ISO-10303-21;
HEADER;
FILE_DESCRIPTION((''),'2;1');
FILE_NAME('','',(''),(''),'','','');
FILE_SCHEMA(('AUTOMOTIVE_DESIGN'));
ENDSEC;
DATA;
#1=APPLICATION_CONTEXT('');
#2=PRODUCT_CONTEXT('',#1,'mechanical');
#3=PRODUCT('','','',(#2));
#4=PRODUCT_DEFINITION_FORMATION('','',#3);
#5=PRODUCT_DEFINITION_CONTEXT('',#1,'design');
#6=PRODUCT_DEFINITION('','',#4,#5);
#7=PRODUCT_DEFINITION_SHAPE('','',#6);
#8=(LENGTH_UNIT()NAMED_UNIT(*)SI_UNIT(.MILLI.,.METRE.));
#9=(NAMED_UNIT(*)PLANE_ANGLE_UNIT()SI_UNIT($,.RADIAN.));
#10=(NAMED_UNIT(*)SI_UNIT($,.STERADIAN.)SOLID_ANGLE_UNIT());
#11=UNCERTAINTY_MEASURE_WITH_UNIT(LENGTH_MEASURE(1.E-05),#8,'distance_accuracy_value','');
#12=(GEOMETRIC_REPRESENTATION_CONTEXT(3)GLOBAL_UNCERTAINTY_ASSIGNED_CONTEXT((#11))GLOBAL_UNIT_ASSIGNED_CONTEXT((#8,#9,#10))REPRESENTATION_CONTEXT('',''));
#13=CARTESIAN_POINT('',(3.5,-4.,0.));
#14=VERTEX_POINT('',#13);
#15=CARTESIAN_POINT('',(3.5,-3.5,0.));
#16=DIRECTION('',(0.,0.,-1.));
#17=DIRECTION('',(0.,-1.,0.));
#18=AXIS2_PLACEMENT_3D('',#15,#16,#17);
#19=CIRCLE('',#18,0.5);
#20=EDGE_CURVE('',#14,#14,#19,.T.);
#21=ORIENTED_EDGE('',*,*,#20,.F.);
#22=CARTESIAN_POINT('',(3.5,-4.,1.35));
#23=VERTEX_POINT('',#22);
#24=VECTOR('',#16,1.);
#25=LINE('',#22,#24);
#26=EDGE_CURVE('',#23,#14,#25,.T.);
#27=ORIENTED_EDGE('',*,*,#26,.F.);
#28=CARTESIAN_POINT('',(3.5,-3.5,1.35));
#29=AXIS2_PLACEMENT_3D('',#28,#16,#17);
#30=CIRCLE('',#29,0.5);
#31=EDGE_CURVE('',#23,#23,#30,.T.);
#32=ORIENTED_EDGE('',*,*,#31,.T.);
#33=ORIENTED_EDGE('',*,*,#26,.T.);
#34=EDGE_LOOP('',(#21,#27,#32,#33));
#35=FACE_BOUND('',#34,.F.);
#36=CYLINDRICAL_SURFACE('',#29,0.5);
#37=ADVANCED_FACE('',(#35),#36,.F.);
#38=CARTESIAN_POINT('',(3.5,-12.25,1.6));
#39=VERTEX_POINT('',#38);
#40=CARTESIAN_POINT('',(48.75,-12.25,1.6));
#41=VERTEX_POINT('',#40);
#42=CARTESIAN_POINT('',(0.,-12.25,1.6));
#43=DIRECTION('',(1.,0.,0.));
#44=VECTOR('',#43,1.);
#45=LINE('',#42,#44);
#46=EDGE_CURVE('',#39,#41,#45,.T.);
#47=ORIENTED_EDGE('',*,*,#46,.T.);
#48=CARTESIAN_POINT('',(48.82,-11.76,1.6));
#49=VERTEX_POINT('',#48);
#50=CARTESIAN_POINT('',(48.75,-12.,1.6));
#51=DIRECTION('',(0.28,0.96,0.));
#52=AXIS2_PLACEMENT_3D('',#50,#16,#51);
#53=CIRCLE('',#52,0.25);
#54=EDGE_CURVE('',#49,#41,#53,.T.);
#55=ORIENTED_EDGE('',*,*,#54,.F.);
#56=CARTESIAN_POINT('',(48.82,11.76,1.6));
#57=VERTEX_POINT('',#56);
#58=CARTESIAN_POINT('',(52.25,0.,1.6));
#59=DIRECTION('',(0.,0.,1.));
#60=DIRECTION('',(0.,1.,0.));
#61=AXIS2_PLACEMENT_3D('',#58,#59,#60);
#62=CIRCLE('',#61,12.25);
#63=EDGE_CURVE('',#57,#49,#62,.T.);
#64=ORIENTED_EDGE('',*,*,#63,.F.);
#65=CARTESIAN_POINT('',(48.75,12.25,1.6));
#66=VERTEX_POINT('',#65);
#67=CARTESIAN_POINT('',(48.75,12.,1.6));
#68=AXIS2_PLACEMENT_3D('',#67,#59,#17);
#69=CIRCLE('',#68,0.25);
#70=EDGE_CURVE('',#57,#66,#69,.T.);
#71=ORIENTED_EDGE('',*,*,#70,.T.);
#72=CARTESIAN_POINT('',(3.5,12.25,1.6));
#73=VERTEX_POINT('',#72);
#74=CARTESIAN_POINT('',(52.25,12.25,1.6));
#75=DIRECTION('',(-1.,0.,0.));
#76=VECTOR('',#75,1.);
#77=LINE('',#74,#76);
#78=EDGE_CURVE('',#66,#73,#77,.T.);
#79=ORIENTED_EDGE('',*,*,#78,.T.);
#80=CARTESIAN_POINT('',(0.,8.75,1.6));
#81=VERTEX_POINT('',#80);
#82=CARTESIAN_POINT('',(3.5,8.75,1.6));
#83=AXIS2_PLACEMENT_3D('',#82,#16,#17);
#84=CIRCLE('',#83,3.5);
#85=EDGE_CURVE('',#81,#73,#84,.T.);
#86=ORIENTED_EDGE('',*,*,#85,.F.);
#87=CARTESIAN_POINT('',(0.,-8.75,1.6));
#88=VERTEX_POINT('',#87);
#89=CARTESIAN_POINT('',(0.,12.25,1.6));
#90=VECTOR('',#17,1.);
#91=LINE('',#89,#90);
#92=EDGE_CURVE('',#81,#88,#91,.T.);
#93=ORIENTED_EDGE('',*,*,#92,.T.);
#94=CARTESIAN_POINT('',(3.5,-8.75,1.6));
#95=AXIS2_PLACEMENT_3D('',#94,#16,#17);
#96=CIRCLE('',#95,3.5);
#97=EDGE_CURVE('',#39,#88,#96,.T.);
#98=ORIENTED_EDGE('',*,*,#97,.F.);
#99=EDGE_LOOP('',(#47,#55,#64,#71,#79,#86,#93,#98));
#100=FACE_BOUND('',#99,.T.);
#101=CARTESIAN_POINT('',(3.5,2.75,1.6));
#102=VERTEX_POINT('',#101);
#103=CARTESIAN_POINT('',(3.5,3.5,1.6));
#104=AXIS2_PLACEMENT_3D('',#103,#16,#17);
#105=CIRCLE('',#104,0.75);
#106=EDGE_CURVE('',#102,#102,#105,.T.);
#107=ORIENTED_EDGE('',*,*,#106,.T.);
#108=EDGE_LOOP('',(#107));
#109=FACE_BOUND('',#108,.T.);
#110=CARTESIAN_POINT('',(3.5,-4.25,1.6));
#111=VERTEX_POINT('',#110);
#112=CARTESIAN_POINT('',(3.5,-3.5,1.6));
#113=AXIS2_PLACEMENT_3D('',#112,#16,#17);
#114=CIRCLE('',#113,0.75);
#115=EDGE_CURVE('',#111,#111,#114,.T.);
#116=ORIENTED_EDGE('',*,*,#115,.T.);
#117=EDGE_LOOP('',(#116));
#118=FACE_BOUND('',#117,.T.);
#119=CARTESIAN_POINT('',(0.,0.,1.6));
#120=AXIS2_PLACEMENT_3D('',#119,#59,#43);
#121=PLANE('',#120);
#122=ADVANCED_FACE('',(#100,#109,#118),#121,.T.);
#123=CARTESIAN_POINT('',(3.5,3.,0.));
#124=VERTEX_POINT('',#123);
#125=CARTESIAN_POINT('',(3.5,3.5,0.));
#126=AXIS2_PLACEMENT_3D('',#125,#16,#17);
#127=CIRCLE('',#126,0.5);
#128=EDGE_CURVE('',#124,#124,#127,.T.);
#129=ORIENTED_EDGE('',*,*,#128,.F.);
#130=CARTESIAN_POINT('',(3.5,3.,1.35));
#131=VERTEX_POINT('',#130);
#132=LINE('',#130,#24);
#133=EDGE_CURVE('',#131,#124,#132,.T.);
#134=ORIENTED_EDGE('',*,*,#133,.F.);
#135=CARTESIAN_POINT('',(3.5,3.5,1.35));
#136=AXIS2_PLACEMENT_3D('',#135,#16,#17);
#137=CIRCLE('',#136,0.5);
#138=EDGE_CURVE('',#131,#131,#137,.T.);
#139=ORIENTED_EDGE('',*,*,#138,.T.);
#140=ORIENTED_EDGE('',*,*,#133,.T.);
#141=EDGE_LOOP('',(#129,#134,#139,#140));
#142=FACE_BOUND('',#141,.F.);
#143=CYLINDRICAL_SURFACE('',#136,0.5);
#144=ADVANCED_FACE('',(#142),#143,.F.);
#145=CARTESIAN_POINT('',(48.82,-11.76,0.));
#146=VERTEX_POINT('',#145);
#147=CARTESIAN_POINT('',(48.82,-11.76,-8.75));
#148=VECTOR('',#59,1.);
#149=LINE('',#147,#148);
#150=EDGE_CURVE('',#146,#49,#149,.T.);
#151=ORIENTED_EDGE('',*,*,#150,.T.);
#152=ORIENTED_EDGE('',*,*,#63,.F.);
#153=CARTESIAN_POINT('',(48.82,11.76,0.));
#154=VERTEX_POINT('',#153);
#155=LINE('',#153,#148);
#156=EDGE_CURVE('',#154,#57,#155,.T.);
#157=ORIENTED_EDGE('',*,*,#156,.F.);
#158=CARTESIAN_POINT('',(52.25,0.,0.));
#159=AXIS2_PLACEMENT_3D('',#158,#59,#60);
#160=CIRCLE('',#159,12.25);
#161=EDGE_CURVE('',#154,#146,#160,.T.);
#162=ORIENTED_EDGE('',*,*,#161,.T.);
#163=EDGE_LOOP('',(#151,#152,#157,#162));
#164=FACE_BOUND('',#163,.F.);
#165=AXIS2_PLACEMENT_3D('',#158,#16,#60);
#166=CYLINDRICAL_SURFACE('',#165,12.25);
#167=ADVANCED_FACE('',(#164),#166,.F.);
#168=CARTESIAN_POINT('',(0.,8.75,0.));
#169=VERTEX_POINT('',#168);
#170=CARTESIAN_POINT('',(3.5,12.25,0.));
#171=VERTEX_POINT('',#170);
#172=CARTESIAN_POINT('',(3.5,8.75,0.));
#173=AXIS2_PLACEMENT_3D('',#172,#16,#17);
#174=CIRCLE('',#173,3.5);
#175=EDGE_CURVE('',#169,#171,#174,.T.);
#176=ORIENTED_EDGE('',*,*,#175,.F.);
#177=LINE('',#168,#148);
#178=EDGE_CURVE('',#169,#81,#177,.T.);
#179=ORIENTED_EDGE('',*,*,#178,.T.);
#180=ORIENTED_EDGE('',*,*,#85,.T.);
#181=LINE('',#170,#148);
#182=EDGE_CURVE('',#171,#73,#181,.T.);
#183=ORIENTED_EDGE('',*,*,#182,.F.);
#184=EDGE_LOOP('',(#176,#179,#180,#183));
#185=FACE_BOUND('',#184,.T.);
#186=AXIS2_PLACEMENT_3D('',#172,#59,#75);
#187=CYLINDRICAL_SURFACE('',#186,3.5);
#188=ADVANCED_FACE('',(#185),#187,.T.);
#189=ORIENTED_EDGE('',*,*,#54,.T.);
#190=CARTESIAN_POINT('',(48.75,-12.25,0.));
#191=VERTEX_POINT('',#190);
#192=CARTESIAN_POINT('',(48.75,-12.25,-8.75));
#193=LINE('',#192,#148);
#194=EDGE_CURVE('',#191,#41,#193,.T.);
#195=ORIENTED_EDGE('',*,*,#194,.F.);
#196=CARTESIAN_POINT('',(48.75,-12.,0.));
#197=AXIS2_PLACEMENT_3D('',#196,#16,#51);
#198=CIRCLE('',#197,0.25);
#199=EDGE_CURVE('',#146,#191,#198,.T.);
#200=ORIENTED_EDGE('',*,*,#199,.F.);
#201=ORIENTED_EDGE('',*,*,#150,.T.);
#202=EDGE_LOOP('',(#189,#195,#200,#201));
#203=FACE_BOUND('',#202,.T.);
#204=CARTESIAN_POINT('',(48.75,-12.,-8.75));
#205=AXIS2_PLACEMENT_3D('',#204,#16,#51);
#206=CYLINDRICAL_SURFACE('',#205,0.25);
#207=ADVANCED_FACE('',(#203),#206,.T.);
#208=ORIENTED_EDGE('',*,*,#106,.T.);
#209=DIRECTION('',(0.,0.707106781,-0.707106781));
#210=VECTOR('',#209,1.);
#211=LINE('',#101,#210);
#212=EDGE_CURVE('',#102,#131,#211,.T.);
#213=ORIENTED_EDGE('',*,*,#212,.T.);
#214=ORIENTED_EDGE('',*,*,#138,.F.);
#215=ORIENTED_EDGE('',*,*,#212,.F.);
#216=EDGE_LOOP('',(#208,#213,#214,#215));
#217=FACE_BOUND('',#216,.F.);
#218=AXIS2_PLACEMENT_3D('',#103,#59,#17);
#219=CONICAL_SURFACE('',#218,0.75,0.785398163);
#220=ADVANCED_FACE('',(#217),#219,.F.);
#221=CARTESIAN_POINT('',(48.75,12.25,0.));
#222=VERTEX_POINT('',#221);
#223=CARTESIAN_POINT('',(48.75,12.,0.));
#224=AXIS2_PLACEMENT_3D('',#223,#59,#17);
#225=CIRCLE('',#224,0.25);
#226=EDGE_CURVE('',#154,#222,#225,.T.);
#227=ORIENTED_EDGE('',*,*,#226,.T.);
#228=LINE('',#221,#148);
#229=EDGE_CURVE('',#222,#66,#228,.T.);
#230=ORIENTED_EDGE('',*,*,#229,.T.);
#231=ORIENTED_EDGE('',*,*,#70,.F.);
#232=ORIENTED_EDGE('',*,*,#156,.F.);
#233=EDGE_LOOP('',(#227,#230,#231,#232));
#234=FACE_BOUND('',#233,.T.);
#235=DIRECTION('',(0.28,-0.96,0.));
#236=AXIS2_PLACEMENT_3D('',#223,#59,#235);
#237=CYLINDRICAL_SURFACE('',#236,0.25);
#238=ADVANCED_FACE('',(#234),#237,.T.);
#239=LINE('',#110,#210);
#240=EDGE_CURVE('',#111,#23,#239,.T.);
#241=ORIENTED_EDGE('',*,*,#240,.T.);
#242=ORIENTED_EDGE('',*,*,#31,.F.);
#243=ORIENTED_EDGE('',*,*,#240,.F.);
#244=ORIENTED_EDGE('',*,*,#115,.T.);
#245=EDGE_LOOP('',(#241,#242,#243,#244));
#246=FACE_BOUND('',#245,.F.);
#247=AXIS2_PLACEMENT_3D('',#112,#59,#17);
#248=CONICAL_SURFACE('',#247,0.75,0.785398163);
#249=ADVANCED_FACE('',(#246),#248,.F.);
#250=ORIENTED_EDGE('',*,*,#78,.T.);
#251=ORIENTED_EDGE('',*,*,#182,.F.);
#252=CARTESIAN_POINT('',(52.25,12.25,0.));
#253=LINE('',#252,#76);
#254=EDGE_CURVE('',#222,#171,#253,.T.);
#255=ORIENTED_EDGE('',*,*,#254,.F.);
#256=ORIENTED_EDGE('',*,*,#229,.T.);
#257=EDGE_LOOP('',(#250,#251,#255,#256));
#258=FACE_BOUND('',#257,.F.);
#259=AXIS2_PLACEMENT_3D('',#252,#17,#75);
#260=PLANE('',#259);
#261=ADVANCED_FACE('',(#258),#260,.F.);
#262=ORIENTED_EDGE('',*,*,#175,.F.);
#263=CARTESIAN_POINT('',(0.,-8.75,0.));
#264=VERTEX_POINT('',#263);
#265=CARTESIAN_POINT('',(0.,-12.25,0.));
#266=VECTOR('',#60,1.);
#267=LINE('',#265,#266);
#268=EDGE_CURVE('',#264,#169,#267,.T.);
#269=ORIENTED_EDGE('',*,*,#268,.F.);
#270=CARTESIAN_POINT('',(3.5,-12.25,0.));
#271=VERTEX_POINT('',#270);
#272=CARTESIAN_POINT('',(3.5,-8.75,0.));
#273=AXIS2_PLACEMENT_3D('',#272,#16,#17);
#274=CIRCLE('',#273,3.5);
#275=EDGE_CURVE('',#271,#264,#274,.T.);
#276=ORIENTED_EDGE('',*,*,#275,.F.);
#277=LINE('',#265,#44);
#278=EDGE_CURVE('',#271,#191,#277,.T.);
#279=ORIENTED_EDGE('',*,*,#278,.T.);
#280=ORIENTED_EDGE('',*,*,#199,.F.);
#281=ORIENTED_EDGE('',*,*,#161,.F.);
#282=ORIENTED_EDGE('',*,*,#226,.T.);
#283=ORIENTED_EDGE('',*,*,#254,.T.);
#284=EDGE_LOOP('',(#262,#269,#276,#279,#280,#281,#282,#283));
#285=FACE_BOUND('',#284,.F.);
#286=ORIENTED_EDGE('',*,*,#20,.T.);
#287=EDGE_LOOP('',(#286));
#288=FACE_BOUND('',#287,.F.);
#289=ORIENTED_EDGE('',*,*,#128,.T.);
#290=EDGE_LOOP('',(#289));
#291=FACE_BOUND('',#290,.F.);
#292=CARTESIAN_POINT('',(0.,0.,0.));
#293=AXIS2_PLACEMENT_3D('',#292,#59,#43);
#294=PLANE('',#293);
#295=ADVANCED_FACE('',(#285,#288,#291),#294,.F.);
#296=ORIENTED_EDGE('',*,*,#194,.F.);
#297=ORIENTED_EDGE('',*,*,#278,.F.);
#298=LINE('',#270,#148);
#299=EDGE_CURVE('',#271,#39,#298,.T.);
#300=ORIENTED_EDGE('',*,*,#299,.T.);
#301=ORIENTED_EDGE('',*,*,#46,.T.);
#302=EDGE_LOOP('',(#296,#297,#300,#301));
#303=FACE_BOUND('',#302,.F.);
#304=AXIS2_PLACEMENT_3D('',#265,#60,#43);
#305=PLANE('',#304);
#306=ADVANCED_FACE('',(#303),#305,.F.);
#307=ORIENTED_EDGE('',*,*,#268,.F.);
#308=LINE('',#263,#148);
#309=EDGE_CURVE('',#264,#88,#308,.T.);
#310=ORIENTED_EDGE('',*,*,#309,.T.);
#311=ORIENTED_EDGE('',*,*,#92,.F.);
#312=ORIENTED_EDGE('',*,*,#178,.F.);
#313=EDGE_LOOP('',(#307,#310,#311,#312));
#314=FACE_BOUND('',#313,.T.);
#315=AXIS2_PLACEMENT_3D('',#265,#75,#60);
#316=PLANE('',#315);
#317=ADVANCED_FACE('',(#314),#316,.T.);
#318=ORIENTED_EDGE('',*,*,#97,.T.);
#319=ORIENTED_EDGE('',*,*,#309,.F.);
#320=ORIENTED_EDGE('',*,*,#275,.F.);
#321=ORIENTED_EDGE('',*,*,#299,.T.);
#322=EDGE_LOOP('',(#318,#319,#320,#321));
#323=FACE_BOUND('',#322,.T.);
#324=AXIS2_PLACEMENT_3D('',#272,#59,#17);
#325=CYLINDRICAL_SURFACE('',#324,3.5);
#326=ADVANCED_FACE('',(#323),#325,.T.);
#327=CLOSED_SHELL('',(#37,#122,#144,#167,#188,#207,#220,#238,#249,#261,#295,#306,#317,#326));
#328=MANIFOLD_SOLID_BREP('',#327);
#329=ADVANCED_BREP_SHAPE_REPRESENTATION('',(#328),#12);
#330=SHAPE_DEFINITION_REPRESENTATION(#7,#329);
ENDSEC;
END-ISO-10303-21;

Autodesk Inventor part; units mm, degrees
ref_plane "YZ Plane" through (0, 0, 0) normal (1, 0, 0) x (0, 1, 0)
ref_plane "XZ Plane" through (0, 0, 0) normal (0, 1, 0) x (-1, 0, 0)
ref_plane "XY Plane" through (0, 0, 0) normal (0, 0, 1) x (1, 0, 0)
sketch "Эскиз1" plane through (0, 0, 0) normal (0, 0, 1) x (1, 0, 0)
  line L0 (52.25, 12.25) -> (0, 12.25)
  line L1 (0, -12.25) -> (52.25, -12.25)
  arc A0 (52.25, 12.25) -> (52.25, -12.25) centre (52.25, 0) ccw
  line L2 (0, -12.25) -> (0, 12.25)
  line L3 (0, 0) -> (40, 0) construction
  line L4 (0, 0) -> (0, 12.25) construction
  line L5 (0, 12.25) -> (0, 11.25)
  point P0 (20, 0)
  dimension "d0" = 12.25
  dimension "d47" = 40
extrude "Выдавливание3" add sketch "Эскиз1" along normal blind 1.6
fillet "Сопряжение3" radius 0.25 2 edges at (52.25, 12.25, 0.8) (52.25, -12.25, 0.8)
fillet "Сопряжение4" radius 3.5 2 edges at (0, -12.25, 0.8) (0, 12.25, 0.8)
sketch "Эскиз6" plane through (0, 0, 1.6) normal (0, 0, 1) x (1, 0, 0)
  arc A0 (48.82, 11.76) -> (48.82, -11.76) centre (52.25, 0) ccw construction
  line L0 (40, 0) -> (0, 0) construction
  line L1 (0, -12.25) -> (0, 12.25) construction
  circle A1 centre (3.5, 3.5) radius 0.5
  line L2 (3.5, 3.5) -> (0, 3.5) construction
  line L3 (3.5, 3.5) -> (3.5, 0) construction
  circle A2 centre (3.5, -3.5) radius 0.5
  point P0 (48.75, -12.25)
  dimension "d58" = 1
  dimension "d59" = 3.5
hole "Отверстие1" at (3.5, -3.5, 1.6) at (3.5, 3.5, 1.6) direction (0, 0, -1) diameter 1 end through all countersink diameter 1.5 countersink angle 90
properties part number "Поршень"
